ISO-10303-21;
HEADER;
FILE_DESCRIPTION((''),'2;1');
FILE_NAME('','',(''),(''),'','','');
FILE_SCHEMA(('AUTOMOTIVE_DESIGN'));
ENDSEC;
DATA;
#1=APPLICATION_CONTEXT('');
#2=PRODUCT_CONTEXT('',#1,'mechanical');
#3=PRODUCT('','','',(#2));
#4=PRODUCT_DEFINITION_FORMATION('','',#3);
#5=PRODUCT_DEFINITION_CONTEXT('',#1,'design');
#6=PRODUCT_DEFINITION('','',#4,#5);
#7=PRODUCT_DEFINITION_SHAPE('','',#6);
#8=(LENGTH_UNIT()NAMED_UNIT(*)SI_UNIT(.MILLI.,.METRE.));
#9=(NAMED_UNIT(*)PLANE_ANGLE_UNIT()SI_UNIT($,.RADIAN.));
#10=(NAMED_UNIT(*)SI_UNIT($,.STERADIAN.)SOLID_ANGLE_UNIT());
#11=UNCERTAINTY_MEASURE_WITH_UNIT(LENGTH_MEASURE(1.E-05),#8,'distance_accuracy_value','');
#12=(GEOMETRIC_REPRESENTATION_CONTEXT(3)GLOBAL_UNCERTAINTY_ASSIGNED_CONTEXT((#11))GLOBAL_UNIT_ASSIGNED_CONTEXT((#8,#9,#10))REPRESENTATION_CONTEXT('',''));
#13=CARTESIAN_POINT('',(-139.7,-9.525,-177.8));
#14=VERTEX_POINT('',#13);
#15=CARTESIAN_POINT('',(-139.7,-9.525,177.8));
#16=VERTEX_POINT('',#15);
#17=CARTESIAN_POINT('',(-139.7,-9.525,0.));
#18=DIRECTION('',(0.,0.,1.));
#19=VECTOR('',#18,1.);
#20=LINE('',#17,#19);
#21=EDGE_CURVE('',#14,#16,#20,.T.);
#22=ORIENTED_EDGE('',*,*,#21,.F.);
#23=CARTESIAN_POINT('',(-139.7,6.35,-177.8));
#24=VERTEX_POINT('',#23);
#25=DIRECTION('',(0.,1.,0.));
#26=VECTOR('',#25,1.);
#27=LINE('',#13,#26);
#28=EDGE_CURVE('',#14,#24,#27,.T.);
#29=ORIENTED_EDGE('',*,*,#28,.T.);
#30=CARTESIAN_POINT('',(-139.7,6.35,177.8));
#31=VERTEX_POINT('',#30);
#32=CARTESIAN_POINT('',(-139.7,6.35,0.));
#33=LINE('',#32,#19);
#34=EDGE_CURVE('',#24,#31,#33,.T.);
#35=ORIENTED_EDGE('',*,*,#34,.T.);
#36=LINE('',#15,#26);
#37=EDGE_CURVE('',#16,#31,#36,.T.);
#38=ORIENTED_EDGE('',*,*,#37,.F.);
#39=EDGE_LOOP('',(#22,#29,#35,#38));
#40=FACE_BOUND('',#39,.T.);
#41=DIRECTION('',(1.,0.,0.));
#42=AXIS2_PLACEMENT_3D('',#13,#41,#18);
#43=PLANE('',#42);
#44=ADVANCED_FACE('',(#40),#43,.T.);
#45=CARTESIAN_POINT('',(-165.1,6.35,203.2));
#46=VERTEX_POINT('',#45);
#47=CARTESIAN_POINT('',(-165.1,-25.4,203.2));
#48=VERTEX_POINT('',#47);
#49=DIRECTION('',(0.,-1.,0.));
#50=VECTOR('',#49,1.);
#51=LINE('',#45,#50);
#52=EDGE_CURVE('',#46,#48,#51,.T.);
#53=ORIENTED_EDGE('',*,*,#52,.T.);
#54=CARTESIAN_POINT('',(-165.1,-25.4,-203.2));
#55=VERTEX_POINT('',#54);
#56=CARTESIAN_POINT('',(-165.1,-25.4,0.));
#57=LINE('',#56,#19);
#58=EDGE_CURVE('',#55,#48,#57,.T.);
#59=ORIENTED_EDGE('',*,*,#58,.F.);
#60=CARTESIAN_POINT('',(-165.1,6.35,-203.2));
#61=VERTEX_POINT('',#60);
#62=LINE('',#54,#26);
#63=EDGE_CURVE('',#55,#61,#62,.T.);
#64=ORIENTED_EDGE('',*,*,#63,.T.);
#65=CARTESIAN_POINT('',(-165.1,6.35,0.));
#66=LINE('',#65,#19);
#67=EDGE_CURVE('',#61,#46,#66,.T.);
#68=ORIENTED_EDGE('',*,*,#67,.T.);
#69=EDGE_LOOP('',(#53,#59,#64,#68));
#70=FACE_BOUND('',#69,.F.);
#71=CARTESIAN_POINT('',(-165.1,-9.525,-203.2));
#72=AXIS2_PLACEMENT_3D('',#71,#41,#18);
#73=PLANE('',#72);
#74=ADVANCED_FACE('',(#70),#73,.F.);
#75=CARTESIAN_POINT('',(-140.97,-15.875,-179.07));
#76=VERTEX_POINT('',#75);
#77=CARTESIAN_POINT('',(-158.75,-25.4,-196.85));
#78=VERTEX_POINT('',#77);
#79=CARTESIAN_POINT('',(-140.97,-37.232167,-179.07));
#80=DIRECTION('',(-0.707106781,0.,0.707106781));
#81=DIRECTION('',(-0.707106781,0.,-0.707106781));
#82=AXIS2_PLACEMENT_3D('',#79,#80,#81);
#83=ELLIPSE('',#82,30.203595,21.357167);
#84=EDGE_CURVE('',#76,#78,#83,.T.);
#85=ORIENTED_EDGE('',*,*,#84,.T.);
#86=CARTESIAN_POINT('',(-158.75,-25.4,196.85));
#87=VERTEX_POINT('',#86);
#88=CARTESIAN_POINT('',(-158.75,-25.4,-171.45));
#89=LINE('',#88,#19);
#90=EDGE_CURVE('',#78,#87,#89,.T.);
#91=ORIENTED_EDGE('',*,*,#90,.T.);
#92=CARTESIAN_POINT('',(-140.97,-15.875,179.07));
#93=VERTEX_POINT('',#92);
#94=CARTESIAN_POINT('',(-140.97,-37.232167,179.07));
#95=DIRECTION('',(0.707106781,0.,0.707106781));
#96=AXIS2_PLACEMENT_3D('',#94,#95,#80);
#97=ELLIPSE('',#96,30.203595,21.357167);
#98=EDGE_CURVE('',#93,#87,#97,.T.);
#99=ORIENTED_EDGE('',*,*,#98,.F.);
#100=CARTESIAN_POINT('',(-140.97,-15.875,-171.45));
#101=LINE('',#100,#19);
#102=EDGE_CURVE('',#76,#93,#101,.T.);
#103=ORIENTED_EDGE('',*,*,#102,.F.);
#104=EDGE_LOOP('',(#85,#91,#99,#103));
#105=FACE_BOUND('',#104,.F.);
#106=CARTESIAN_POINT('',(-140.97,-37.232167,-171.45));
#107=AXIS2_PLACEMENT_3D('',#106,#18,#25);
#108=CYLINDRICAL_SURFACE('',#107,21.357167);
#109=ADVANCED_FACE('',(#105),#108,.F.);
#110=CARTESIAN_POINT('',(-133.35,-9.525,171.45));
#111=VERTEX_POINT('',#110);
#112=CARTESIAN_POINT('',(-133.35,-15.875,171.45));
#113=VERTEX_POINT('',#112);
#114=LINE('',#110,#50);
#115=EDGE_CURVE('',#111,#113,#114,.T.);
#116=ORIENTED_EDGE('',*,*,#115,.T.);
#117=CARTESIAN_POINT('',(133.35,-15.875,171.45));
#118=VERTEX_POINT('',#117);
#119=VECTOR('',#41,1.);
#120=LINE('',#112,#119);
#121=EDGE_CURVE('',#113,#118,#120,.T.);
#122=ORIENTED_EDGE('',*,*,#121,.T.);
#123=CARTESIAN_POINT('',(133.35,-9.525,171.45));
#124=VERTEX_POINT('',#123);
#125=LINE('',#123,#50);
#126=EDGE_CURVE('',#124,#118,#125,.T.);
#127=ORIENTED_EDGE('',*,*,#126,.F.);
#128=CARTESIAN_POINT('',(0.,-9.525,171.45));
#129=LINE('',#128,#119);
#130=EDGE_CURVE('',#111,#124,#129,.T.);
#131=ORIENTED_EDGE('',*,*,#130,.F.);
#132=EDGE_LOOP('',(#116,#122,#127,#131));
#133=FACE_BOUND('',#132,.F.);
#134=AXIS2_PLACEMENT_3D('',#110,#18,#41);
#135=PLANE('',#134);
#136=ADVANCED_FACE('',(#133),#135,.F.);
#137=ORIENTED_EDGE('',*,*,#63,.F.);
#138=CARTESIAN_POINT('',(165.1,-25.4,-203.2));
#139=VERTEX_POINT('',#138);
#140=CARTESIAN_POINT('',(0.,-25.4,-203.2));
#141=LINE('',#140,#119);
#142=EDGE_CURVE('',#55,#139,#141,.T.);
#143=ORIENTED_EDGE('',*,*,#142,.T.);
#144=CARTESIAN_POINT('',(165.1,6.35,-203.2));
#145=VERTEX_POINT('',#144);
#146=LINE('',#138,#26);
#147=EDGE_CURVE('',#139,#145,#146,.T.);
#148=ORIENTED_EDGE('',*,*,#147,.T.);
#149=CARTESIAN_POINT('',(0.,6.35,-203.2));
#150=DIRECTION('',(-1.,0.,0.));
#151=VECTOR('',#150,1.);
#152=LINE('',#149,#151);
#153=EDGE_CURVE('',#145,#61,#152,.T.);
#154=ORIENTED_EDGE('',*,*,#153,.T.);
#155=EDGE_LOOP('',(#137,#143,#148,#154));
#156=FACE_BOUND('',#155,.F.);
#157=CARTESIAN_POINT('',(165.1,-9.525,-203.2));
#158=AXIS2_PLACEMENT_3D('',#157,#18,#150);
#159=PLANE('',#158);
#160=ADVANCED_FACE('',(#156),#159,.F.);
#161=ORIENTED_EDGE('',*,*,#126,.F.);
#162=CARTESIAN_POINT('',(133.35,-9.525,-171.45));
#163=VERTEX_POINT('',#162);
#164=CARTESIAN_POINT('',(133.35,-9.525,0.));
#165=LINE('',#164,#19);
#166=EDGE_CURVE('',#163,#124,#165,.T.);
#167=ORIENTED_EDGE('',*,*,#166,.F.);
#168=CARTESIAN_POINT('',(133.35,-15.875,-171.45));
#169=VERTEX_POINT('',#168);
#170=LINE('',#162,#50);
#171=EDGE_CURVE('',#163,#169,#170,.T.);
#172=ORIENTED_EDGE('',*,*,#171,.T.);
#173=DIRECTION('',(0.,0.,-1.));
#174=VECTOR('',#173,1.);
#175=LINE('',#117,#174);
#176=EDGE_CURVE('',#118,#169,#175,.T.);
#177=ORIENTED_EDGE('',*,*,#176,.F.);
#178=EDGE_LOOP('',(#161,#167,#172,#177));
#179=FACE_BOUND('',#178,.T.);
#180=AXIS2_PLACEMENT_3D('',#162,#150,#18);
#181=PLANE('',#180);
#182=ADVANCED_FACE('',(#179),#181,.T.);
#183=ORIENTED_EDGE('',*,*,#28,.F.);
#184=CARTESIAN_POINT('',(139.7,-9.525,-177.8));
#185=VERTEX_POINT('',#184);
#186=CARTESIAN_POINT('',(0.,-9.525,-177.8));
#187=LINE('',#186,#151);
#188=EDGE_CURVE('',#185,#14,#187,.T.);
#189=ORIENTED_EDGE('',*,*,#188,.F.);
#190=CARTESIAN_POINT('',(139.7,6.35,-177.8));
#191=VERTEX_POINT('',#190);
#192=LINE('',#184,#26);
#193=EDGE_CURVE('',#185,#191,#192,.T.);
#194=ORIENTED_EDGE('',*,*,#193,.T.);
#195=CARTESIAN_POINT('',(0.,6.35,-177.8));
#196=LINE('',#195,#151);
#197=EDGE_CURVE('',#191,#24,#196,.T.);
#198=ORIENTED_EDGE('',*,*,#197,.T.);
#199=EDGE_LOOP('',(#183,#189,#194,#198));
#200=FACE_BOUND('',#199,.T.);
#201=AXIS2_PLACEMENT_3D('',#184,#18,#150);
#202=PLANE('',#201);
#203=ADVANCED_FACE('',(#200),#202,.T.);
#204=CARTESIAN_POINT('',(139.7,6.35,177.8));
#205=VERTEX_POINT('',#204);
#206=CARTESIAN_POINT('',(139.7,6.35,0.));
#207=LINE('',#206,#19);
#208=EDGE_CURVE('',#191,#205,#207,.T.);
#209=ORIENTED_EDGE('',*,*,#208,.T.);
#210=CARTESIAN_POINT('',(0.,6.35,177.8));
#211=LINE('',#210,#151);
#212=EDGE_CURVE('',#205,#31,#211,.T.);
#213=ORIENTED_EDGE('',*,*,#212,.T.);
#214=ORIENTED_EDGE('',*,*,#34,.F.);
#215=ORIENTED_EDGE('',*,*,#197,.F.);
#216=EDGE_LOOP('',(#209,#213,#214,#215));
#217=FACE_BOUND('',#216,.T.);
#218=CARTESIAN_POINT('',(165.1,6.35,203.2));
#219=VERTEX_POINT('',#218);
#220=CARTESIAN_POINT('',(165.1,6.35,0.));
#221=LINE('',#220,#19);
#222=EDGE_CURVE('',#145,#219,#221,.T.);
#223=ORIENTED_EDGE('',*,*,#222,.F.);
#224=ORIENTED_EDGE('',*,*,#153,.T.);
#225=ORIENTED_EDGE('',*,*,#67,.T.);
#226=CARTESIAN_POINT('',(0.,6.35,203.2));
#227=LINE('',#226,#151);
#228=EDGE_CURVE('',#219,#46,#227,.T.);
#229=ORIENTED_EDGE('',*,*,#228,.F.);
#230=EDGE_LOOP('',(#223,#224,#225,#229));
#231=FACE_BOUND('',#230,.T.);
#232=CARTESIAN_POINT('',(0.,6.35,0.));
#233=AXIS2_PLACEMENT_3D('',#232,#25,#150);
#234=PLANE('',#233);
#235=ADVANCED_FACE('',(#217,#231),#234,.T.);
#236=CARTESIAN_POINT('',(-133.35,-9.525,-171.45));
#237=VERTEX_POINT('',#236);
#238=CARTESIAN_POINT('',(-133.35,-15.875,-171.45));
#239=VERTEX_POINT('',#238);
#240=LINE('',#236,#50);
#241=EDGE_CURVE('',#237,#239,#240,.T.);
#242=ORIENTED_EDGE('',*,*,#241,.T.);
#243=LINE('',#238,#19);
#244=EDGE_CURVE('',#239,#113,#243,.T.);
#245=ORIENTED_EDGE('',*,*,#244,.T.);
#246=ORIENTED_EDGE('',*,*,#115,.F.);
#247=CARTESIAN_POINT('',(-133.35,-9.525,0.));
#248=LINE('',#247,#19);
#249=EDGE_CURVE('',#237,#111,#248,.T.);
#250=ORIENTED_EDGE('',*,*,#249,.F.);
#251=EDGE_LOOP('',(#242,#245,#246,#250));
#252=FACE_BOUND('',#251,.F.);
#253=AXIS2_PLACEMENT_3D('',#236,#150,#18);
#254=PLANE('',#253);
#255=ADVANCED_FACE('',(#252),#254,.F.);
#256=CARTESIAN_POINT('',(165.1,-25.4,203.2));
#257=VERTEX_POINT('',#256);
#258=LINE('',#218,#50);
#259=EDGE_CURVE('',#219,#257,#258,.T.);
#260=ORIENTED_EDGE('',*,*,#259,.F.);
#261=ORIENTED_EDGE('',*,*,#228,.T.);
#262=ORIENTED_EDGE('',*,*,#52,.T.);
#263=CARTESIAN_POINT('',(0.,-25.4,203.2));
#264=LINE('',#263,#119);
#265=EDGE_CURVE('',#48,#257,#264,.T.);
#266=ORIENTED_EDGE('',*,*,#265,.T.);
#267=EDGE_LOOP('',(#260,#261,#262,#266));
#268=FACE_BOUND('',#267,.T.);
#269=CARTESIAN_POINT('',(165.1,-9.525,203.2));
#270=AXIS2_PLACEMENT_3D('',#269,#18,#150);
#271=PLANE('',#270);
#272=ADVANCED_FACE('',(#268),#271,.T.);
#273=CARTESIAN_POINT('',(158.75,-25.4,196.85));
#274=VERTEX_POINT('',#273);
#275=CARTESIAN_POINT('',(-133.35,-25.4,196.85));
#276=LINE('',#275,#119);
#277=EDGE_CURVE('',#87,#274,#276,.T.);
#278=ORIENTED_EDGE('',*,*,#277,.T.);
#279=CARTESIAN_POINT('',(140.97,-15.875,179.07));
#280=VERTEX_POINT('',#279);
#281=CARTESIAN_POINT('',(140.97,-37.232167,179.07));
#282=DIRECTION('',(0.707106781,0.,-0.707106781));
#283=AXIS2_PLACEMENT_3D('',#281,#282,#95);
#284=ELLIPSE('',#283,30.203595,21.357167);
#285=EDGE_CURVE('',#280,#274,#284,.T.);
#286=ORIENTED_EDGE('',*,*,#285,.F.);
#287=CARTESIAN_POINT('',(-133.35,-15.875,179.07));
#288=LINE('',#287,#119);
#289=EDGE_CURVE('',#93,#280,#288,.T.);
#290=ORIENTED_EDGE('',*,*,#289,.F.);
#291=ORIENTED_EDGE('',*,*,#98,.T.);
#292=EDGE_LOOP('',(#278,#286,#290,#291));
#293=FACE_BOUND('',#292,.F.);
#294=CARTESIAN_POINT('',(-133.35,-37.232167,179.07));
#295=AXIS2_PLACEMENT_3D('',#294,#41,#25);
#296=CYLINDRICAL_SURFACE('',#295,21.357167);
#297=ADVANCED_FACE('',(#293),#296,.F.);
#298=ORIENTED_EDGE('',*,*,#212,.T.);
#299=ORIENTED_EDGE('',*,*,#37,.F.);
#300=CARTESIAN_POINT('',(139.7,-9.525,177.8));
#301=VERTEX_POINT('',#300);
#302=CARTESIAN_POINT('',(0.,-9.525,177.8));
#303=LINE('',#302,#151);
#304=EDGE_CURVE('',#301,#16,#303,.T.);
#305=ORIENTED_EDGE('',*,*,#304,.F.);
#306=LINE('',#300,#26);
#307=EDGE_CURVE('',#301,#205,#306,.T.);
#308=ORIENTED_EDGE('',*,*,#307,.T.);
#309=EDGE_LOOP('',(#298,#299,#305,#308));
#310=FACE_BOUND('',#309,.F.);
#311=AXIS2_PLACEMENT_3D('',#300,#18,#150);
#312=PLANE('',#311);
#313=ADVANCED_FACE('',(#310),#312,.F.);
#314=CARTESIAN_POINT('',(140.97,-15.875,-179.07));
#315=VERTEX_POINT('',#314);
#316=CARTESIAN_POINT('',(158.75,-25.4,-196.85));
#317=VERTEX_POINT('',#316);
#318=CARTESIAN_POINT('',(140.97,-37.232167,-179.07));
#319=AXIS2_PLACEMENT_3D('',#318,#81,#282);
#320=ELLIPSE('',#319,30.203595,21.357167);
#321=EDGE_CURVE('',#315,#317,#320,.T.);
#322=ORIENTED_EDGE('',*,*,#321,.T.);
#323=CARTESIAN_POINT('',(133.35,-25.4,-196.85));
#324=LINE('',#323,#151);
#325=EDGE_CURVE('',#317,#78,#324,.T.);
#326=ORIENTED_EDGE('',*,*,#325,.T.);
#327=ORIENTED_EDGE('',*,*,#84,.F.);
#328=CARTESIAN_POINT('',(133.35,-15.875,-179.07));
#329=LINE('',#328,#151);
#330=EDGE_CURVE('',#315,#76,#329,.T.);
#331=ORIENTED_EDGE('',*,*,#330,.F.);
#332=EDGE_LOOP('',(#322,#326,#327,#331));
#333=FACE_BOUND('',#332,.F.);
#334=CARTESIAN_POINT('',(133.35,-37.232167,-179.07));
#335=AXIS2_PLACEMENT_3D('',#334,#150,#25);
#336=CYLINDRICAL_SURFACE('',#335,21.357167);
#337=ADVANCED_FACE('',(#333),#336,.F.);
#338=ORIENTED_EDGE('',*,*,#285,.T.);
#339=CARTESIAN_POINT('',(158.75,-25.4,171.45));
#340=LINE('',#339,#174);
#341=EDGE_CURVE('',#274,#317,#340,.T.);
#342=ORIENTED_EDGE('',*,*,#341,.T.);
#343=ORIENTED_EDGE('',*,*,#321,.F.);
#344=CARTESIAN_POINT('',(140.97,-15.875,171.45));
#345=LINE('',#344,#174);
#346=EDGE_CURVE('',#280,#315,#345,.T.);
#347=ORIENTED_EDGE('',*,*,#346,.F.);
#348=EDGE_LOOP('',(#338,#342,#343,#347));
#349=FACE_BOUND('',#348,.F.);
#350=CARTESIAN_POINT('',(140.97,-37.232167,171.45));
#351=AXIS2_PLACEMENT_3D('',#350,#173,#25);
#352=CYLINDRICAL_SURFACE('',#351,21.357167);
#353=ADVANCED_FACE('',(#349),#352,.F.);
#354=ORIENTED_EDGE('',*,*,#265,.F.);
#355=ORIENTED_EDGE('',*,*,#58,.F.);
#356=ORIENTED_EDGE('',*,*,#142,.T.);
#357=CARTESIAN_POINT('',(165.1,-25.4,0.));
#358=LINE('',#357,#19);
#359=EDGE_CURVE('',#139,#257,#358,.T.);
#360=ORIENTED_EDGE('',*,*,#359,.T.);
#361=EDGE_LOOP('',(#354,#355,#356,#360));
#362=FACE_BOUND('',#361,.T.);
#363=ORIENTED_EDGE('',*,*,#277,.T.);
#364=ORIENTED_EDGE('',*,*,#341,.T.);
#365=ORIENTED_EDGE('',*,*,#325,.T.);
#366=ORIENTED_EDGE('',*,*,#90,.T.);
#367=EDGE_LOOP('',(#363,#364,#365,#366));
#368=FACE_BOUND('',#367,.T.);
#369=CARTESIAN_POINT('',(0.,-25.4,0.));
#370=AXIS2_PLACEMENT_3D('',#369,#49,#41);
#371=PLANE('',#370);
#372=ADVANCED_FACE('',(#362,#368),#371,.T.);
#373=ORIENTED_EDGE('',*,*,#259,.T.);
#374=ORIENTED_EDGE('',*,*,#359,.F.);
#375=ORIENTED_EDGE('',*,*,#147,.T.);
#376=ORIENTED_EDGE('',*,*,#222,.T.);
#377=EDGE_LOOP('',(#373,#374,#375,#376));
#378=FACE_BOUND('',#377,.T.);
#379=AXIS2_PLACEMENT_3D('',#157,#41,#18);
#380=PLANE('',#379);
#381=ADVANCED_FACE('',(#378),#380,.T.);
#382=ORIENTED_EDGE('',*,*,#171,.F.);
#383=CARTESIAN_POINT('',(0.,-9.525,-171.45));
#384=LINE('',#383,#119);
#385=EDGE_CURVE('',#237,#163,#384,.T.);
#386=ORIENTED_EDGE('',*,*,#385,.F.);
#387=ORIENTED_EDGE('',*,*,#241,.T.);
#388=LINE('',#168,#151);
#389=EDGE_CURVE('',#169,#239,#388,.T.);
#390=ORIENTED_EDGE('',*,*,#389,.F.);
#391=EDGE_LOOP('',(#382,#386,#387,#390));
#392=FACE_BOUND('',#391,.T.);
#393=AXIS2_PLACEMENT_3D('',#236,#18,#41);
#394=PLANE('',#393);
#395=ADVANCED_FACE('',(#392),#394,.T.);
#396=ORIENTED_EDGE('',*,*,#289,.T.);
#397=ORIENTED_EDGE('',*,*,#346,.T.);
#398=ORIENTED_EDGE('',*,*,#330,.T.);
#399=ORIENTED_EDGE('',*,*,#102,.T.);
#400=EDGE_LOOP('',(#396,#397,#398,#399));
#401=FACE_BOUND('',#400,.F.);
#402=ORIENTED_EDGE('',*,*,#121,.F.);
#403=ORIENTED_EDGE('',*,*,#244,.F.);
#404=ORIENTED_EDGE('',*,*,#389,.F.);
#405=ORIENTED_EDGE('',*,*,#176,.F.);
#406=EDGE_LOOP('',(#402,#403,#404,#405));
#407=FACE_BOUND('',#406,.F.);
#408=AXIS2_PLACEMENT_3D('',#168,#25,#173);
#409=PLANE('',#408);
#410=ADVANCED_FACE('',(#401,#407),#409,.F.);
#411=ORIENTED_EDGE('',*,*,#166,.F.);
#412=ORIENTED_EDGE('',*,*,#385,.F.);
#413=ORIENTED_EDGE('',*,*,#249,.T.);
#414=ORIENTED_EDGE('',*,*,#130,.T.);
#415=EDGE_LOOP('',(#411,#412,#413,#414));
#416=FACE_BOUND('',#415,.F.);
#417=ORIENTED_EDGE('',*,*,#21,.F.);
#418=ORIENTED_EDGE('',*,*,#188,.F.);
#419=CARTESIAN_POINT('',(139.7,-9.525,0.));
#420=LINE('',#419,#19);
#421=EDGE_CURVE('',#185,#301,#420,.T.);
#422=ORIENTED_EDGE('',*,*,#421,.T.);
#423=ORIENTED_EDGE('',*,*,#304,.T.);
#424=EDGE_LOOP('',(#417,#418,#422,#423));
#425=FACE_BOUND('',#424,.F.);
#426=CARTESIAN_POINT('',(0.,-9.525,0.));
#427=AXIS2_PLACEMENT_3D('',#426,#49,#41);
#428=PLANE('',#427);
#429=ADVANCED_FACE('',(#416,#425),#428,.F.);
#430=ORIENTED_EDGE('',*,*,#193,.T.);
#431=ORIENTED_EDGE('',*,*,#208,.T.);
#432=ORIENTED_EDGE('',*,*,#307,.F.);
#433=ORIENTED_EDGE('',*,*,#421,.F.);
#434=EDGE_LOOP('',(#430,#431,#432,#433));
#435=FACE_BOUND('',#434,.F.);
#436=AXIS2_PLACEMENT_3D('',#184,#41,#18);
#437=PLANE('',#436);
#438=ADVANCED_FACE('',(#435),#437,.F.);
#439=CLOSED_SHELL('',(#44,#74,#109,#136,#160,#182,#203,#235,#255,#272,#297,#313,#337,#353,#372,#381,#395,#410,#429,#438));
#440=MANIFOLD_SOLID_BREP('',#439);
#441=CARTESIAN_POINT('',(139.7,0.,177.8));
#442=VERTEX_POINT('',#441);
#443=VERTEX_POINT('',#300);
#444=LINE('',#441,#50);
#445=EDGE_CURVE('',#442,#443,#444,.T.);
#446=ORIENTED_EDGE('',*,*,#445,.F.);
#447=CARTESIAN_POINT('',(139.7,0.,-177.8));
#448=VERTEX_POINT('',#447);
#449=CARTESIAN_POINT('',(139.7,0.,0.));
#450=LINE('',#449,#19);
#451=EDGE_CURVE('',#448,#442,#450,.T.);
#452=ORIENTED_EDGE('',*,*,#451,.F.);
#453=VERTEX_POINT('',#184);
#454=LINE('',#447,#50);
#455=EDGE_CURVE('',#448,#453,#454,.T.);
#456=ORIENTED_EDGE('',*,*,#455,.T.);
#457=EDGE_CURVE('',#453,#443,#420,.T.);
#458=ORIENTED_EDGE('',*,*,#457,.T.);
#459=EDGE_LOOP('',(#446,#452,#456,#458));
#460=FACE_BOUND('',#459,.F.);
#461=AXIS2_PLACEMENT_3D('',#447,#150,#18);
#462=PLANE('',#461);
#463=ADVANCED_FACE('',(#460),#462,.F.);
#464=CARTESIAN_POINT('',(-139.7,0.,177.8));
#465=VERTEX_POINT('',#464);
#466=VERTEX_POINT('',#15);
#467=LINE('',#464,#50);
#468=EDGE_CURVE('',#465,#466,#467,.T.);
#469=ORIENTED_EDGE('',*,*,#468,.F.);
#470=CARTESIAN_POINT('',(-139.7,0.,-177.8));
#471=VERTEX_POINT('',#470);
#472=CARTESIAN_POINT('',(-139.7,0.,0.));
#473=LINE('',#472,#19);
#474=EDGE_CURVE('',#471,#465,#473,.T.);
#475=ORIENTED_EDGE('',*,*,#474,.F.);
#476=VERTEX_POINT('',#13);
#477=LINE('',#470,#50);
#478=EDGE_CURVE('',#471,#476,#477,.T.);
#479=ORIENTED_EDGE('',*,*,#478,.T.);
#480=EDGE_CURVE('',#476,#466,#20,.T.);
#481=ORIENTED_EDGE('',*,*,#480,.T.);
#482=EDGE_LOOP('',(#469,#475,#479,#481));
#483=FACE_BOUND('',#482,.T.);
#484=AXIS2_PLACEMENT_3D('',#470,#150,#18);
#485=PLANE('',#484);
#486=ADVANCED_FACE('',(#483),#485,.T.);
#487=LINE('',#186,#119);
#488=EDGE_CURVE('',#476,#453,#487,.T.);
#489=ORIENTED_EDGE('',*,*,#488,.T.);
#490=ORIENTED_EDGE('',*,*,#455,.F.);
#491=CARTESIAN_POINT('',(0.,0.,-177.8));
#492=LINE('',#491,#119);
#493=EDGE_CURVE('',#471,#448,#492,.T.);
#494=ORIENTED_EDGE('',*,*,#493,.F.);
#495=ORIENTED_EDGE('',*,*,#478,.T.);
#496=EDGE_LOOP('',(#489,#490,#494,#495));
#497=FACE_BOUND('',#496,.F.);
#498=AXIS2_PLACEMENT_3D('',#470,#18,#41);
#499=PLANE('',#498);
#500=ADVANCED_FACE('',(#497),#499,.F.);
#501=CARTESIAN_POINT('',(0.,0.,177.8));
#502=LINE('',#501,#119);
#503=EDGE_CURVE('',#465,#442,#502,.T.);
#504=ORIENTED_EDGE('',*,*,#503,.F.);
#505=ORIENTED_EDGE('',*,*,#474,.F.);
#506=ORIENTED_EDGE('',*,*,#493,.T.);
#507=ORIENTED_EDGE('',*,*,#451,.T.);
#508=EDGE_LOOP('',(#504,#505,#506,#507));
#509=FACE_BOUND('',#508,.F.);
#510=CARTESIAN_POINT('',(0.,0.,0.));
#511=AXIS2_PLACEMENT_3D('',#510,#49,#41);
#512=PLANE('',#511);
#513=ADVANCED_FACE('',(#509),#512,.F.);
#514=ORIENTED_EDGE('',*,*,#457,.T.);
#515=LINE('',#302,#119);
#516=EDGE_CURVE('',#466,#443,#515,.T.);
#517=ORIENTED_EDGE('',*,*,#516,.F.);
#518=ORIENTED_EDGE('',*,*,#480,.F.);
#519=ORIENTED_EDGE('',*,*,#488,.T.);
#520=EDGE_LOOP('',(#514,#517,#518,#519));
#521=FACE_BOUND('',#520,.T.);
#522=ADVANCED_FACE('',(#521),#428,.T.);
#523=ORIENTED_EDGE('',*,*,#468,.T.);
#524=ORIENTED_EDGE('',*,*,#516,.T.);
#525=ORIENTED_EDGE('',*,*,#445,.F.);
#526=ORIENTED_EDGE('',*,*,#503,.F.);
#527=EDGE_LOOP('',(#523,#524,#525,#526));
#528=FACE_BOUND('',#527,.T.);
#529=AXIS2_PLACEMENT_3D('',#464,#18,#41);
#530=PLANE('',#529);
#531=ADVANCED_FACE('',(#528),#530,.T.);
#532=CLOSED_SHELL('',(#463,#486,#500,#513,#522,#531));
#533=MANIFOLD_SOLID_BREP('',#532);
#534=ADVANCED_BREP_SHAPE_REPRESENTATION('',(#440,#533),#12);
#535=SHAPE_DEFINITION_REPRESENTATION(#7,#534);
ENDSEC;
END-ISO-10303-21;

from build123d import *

# Parameters (mm, degrees)
F0_W     = 279.4
F0_H     = 355.6
F1_DEPTH = 9.525
F2_W     = 330.2
F2_H     = 406.4
F2_W_2   = 279.4
F2_H_2   = 355.6
F2_W_3   = 266.7
F2_H_3   = 342.9
F3_DEPTH = 15.875
F4_W     = 330.2
F4_H     = 406.4
F4_W_2   = 279.4
F4_H_2   = 355.6
F5_DEPTH = 15.875


with BuildPart() as f1:
    # F0 (on Front) → F1 (new body)
    with BuildSketch(Plane.XZ):
        Rectangle(F0_W, F0_H)
    extrude(amount=F1_DEPTH)


with BuildPart() as f3:
    # F2 (on face) → F3 (new body)
    with BuildSketch(Plane.XZ.offset(9.525)):
        Rectangle(F2_W, F2_H)
        Rectangle(F2_W_2, F2_H_2, mode=Mode.SUBTRACT)
        Rectangle(F2_W_2, F2_H_2)
        Rectangle(F2_W_3, F2_H_3, mode=Mode.SUBTRACT)
    extrude(amount=F3_DEPTH)

    # F4 (on face) → F5 (join)
    with BuildSketch(Plane(origin=(0, -9.525, 0), x_dir=(-1, 0, 0), z_dir=(0, 1, 0))):
        Rectangle(F4_W, F4_H)
        Rectangle(F4_W_2, F4_H_2, mode=Mode.SUBTRACT)
    extrude(amount=F5_DEPTH)

    # F7: sweep along a path in F7_path
    with BuildLine(Plane(origin=(-133.35, -25.4, -171.45), x_dir=(0, 0, 1), z_dir=(0, -1, 0))) as f7_path:
        Line((0, 0), (342.9, 0))
        Line((342.9, 0), (342.9, -266.7))
        Line((342.9, -266.7), (0, -266.7))
        Line((0, -266.7), (0, 0))
    # F6 (on Top) → F7 (sweep, cut)
    with BuildSketch(Plane.XY):
        with BuildLine():
            Line((-158.75, -25.4), (-133.35, -25.4))
            Line((-133.35, -25.4), (-133.35, -15.875))
            Line((-133.35, -15.875), (-140.97, -15.875))
            ThreePointArc((-140.97, -15.875), (-151.0553114107, -18.4062520334), (-158.75, -25.4))
        make_face()
    sweep(path=f7_path.line, transition=Transition.RIGHT, mode=Mode.SUBTRACT)


solid = Compound([f1.part, f3.part])
